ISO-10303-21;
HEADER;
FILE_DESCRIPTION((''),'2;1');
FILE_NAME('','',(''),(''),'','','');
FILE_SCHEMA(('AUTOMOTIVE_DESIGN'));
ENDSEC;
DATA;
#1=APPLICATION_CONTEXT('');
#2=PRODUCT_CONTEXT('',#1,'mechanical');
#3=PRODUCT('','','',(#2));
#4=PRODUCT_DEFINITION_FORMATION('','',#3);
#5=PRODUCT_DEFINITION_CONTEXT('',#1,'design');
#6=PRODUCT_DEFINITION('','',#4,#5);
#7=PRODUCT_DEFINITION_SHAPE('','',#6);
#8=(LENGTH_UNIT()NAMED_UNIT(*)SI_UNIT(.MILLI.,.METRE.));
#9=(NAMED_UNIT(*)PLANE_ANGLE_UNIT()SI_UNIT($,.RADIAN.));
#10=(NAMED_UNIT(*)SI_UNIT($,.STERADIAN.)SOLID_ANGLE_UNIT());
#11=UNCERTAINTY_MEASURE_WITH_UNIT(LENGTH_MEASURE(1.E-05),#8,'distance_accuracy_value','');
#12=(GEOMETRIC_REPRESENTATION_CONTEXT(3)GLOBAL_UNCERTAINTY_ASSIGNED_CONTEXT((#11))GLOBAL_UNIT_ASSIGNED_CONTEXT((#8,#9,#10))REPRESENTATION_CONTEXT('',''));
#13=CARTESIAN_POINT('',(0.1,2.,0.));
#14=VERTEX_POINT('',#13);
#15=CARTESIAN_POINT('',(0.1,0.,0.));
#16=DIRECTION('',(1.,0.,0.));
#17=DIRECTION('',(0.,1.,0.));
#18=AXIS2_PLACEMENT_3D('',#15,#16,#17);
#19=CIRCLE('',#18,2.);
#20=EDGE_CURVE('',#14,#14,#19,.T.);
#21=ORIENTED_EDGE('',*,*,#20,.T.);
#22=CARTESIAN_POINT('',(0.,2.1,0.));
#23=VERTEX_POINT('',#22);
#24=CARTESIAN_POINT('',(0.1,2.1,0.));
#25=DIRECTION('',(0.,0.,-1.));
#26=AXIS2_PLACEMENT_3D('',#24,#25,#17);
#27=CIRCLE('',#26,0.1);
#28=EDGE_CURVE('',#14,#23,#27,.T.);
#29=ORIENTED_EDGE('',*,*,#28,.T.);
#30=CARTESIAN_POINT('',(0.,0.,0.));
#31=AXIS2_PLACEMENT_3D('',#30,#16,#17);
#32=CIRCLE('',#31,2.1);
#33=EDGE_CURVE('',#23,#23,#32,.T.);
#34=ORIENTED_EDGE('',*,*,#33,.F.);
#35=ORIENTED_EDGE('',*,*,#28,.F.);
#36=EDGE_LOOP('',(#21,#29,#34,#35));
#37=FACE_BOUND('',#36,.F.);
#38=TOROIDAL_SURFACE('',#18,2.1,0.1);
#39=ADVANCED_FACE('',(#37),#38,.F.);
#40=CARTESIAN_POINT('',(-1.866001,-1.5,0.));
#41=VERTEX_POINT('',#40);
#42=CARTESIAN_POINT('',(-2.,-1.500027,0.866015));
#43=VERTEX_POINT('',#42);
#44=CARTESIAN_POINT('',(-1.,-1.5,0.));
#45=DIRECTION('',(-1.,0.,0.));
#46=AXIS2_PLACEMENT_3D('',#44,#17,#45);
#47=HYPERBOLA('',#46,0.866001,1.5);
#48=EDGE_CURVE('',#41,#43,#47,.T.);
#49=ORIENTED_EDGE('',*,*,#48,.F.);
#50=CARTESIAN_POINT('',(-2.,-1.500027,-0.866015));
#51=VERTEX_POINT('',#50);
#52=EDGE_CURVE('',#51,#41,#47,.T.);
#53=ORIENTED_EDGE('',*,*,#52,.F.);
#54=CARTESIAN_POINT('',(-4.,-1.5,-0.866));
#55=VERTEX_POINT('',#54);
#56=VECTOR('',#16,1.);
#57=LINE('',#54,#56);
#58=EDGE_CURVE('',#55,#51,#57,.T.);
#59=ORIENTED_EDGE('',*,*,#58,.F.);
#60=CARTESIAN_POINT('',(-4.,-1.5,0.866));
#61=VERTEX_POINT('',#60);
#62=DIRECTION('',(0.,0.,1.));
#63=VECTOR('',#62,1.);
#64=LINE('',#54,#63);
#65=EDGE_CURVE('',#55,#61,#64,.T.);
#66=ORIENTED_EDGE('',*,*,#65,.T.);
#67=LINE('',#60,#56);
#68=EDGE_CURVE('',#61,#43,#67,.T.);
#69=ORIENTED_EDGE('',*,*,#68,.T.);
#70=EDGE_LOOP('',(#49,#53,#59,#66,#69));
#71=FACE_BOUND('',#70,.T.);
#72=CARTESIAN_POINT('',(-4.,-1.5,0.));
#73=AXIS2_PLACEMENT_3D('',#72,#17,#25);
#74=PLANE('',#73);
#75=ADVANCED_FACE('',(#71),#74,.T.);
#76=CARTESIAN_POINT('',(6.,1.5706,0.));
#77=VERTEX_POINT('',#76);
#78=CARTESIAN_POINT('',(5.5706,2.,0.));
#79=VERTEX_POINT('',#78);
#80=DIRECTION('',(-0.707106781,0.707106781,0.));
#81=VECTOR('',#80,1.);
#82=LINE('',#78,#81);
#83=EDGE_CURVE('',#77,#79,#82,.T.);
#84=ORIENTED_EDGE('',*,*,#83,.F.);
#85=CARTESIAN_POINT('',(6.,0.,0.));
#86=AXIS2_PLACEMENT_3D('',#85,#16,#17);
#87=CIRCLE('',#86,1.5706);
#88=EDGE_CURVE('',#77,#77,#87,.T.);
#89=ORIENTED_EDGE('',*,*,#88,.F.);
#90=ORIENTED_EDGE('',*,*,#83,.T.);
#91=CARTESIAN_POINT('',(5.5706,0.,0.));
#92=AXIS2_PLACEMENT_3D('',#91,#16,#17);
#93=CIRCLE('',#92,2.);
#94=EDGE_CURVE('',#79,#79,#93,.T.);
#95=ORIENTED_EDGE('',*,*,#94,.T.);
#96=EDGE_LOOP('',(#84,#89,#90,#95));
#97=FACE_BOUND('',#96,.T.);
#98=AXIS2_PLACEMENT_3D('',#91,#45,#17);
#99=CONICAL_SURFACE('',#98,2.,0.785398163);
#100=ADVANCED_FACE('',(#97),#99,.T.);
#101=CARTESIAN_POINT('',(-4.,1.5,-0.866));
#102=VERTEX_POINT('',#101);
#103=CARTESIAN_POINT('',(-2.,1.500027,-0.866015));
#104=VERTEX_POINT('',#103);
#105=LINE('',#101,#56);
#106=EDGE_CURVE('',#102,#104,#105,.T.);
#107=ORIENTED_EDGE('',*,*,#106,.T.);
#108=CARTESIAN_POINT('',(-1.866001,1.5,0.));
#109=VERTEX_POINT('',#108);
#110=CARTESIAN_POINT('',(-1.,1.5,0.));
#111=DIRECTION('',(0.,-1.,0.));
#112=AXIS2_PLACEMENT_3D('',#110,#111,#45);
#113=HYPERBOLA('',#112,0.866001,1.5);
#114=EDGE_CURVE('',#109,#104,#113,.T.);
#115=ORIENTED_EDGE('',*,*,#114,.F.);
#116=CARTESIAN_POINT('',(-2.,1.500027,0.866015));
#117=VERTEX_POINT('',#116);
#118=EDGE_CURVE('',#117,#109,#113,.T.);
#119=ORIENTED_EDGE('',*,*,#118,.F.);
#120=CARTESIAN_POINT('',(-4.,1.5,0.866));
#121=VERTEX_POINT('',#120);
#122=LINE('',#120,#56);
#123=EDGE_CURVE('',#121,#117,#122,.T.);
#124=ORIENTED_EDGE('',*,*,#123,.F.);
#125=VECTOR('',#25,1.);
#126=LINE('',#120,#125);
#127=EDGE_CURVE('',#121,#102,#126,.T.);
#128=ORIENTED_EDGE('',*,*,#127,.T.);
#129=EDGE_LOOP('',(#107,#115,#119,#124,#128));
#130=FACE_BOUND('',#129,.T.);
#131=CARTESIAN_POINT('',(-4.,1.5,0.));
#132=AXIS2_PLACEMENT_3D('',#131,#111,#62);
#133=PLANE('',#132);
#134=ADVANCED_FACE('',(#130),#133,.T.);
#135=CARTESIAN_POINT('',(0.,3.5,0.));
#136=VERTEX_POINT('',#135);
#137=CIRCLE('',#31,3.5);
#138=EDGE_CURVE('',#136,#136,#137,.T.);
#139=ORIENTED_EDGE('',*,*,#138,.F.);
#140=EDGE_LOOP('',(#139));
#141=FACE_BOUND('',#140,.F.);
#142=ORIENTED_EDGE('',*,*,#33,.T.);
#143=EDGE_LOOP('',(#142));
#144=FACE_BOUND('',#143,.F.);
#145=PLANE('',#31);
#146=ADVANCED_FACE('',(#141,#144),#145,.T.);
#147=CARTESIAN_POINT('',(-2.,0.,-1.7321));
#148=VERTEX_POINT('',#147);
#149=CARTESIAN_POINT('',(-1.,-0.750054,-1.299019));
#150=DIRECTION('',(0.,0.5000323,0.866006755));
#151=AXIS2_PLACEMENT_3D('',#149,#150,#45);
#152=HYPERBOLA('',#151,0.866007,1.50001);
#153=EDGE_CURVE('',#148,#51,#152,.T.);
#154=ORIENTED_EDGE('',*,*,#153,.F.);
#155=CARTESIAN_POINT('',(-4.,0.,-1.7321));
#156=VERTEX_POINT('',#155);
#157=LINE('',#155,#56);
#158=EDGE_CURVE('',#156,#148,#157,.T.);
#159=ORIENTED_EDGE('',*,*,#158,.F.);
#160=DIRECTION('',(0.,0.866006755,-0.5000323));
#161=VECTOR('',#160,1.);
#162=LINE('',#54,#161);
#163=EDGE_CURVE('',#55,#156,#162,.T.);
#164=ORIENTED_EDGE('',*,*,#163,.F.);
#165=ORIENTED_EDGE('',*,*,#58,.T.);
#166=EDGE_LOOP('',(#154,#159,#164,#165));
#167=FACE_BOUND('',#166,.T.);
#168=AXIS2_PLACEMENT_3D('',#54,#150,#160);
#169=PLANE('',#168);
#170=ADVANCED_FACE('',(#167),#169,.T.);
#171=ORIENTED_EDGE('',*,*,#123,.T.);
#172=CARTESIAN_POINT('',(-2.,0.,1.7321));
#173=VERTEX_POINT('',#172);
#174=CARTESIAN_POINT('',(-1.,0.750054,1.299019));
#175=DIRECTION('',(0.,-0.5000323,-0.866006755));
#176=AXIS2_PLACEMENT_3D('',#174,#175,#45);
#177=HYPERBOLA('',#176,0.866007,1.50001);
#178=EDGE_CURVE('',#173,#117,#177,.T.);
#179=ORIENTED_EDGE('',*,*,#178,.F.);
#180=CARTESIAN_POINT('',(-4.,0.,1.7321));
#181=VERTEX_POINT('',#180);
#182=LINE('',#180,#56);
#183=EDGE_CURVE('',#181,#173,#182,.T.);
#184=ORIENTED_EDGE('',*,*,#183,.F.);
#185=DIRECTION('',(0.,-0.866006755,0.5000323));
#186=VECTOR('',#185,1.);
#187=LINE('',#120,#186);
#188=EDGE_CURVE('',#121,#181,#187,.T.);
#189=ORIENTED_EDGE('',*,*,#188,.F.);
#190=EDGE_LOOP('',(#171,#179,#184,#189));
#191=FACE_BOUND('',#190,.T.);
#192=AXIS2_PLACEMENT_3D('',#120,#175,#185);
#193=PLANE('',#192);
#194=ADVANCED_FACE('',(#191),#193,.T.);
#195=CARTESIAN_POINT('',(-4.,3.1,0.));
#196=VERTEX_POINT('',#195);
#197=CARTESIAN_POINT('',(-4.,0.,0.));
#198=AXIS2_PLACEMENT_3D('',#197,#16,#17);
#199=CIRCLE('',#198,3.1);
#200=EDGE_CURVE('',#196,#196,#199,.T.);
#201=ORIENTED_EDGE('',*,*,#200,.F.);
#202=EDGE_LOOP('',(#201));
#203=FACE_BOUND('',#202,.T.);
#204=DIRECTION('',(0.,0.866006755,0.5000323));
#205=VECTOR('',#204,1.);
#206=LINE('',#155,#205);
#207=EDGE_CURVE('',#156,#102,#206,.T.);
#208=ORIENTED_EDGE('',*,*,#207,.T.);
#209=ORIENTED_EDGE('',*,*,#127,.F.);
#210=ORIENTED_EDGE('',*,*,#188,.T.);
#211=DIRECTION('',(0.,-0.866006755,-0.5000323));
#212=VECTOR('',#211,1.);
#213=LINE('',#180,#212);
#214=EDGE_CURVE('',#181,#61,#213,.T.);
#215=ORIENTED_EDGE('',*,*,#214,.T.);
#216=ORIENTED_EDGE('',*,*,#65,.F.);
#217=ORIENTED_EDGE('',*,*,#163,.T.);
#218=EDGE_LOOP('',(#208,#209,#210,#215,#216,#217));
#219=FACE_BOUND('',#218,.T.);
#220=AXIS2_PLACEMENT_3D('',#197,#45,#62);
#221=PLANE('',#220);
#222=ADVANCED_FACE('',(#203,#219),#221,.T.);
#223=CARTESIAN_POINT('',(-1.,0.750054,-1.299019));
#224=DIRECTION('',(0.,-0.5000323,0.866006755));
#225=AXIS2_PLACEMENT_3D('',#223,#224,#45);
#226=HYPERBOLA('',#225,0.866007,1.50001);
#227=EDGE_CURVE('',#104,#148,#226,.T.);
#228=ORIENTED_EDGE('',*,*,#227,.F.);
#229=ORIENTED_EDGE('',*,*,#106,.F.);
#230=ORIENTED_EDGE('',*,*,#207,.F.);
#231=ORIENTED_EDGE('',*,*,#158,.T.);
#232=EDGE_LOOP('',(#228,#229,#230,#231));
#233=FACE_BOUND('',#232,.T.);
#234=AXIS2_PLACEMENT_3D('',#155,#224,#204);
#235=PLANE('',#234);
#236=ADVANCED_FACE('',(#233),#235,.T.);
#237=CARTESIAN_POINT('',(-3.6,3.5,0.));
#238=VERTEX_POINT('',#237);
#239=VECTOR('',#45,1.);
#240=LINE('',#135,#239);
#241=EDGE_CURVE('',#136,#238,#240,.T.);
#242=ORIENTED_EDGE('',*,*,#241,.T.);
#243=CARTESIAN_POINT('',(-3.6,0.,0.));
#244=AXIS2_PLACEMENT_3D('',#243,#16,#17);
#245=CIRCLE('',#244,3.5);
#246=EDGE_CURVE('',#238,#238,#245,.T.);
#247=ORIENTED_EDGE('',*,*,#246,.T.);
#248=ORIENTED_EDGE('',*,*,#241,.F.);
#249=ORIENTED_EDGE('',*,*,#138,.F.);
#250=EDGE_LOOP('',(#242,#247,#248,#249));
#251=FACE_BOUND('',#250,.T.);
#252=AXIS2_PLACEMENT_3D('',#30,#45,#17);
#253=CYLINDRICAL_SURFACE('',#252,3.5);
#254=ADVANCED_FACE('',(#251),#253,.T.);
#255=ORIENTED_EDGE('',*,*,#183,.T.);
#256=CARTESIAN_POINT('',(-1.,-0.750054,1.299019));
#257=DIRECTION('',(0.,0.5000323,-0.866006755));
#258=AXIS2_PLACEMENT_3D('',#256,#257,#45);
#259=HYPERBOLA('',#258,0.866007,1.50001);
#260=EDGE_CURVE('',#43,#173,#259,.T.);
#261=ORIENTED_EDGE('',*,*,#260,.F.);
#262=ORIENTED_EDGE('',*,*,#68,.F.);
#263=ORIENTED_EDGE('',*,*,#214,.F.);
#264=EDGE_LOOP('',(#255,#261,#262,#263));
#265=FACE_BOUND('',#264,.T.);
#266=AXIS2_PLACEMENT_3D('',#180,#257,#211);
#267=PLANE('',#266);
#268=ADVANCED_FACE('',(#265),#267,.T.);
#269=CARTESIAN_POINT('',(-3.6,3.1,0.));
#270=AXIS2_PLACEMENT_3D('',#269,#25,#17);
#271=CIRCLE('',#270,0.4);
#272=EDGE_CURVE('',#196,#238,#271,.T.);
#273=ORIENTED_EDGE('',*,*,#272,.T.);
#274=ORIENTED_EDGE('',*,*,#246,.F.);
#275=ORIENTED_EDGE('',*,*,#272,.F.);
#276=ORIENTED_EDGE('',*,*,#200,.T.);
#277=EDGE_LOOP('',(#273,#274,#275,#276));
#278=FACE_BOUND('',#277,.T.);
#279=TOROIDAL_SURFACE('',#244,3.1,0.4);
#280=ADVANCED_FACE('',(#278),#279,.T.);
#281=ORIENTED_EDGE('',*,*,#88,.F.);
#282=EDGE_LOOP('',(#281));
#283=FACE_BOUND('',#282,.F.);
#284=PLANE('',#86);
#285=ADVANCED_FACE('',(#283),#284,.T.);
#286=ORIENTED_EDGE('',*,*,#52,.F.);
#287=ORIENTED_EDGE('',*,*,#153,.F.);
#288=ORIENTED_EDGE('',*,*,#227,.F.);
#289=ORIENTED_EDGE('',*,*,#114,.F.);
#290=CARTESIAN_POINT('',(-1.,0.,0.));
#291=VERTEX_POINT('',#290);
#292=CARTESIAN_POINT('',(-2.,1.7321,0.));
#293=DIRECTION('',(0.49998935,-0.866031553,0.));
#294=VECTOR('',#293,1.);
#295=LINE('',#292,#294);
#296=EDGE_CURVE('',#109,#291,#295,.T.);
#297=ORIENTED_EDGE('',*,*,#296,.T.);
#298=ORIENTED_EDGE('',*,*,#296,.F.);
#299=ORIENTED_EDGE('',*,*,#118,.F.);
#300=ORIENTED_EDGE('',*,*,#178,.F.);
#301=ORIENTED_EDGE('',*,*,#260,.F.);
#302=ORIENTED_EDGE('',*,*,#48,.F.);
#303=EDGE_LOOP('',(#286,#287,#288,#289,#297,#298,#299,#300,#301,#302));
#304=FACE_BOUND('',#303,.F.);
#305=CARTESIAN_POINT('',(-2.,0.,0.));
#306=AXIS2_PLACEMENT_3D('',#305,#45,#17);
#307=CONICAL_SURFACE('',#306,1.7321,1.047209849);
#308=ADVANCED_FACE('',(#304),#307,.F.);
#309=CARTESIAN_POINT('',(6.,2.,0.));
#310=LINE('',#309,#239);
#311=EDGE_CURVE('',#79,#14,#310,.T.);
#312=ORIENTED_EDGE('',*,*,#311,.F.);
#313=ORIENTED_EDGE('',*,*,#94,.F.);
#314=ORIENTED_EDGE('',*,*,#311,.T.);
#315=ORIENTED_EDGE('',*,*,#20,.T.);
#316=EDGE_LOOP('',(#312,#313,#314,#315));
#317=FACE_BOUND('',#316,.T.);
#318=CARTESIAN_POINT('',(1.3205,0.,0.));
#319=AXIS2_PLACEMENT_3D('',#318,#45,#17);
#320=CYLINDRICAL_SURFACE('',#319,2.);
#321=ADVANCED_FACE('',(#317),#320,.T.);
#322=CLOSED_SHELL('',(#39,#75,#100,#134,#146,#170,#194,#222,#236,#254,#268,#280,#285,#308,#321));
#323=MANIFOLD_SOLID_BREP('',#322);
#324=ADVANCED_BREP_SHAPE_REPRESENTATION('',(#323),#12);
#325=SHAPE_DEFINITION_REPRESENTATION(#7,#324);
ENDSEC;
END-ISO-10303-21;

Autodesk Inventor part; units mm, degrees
ref_plane "YZ Plane" through (0, 0, 0) normal (1, 0, 0) x (0, 1, 0)
ref_plane "XZ Plane" through (0, 0, 0) normal (0, 1, 0) x (-1, 0, 0)
sketch "Skizze1" plane through (0, 0, 0) normal (0, 0, 1) x (1, 0, 0)
  line L0 (-1, 0) -> (6, 0)
  line L1 (6, 0) -> (6, 2)
  line L2 (6, 2) -> (1.75, 2)
  line L3 (1.75, 2) -> (1.3205, 2)
  line L4 (1.3205, 2) -> (0, 2)
  line L5 (0, 2) -> (0, 3.5)
  line L6 (0, 3.5) -> (-4, 3.5)
  line L7 (-4, 3.5) -> (-4, 1.7321)
  line L8 (-4, 1.7321) -> (-2, 1.7321)
  line L9 (-2, 1.7321) -> (-1, 0)
  line L10 (-6, 0) -> (8, 0) projected
  line L11 (0, -0.7) -> (0, 4.2) projected
  line L12 (1.75, 2) -> (0, 2) construction
  dimension "d1" = 4.25
  dimension "d2" = 0.4295
  dimension "d3" = 4
  dimension "d4" = 2
  dimension "d5" = 60
  dimension "d6" = 4
  dimension "d7" = 4
  dimension "d8" = 3.4641
  dimension "d9" = 7
  dimension "d26" = 6
revolve "Körper" add sketch "Skizze1" angle 360 about axis through (-1, 0, 0) along (1, 0, 0)
sketch "Skizze2" plane through (-4, 0, 0) normal (-1, 0, 0) x (0, 0, 1)
  circle A0 centre (0, 0) radius 1.7321 projected
  line L0 (0, -4.9) -> (0, 4.9) projected
  line L1 (-4.9, 0) -> (4.9, 0) projected
  line L2 (1.7321, 0) -> (0.866, -1.5)
  line L3 (0.866, -1.5) -> (-0.866, -1.5)
  line L4 (-0.866, -1.5) -> (-1.7321, 0)
  line L5 (-1.7321, 0) -> (-0.866, 1.5)
  line L6 (-0.866, 1.5) -> (0.866, 1.5)
  line L7 (0.866, 1.5) -> (1.7321, 0)
extrude "Loch" add sketch "Skizze2" against normal up to next contours L7 A0 | A0 L2 | L6 L0 A0 | A0 L0 L3 | L0 L6 A0 | A0 L3 L0 | L4 A0 | A0 L5
fillet "Rundung1" radius 0.4 1 edges at (-4, -3.5, 0)
thread "Gewinde" size "M4x0.7" class "6g" standard "ISO Metric profile" length 4.25
chamfer "Fase1" distance 0.4294 distance2 0.4294 1 edges at (6, -2, 0) measured on face at (6, 0.556, 0.0273)
ref_plane "Work Plane1" through (29, 0, 0) normal (0, -1, 0) x (1, 0, 0)
fillet "Fillet2" radius 0.1 1 edges at (0, -2, 0)
equation "\"d1\" = GEL"
equation "\"d3\" = KOH"
equation "\"d4\" = INTI"
equation "\"d6\" = GD"
equation "\"d7\" = BDM"
equation "\"d8\" = 1.1547 * SW"
equation "\"d9\" = KOD"
equation "\"d26\" = NLG"
equation "\"d30\" = R"
equation "\"d17\" = RR"
equation "\"d13\" = GEL"
equation "\"d15\" = -0.5 * SPD + 0.5 * GD"
equation "\"d16\" = GUL"
equation "\"GD\" = 4"
equation "\"NLG\" = 6"
equation "\"GEL\" = 4.25"
equation "\"KOD\" = 7"
equation "\"KOH\" = 4"
equation "\"INTI\" = 2"
equation "\"GAL\" = 0.61345 * PTC"
equation "\"GUL\" = 0.61345 * PTC"
equation "\"BDM\" = NND"
equation "\"SW\" = 3"
equation "\"RR\" = 0.4"
equation "\"SPD\" = NND - 1.2269 * PTC"
equation "\"R\" = 0.1"
equation "\"TOA\" = 30deg"
equation "\"GD1\" = THREADDIA - 1.2269 * PTC"
equation "\"THREADDIA\" = 4"
equation "\"FAWI\" = 45deg"
equation "\"PTC\" = 0.7"
equation "\"NND\" = 4"
equation "\"E0\" = 1.155 * SW"
properties part number "ISO 4762 - M4 x 6" material "Edelstahl, 440C"
